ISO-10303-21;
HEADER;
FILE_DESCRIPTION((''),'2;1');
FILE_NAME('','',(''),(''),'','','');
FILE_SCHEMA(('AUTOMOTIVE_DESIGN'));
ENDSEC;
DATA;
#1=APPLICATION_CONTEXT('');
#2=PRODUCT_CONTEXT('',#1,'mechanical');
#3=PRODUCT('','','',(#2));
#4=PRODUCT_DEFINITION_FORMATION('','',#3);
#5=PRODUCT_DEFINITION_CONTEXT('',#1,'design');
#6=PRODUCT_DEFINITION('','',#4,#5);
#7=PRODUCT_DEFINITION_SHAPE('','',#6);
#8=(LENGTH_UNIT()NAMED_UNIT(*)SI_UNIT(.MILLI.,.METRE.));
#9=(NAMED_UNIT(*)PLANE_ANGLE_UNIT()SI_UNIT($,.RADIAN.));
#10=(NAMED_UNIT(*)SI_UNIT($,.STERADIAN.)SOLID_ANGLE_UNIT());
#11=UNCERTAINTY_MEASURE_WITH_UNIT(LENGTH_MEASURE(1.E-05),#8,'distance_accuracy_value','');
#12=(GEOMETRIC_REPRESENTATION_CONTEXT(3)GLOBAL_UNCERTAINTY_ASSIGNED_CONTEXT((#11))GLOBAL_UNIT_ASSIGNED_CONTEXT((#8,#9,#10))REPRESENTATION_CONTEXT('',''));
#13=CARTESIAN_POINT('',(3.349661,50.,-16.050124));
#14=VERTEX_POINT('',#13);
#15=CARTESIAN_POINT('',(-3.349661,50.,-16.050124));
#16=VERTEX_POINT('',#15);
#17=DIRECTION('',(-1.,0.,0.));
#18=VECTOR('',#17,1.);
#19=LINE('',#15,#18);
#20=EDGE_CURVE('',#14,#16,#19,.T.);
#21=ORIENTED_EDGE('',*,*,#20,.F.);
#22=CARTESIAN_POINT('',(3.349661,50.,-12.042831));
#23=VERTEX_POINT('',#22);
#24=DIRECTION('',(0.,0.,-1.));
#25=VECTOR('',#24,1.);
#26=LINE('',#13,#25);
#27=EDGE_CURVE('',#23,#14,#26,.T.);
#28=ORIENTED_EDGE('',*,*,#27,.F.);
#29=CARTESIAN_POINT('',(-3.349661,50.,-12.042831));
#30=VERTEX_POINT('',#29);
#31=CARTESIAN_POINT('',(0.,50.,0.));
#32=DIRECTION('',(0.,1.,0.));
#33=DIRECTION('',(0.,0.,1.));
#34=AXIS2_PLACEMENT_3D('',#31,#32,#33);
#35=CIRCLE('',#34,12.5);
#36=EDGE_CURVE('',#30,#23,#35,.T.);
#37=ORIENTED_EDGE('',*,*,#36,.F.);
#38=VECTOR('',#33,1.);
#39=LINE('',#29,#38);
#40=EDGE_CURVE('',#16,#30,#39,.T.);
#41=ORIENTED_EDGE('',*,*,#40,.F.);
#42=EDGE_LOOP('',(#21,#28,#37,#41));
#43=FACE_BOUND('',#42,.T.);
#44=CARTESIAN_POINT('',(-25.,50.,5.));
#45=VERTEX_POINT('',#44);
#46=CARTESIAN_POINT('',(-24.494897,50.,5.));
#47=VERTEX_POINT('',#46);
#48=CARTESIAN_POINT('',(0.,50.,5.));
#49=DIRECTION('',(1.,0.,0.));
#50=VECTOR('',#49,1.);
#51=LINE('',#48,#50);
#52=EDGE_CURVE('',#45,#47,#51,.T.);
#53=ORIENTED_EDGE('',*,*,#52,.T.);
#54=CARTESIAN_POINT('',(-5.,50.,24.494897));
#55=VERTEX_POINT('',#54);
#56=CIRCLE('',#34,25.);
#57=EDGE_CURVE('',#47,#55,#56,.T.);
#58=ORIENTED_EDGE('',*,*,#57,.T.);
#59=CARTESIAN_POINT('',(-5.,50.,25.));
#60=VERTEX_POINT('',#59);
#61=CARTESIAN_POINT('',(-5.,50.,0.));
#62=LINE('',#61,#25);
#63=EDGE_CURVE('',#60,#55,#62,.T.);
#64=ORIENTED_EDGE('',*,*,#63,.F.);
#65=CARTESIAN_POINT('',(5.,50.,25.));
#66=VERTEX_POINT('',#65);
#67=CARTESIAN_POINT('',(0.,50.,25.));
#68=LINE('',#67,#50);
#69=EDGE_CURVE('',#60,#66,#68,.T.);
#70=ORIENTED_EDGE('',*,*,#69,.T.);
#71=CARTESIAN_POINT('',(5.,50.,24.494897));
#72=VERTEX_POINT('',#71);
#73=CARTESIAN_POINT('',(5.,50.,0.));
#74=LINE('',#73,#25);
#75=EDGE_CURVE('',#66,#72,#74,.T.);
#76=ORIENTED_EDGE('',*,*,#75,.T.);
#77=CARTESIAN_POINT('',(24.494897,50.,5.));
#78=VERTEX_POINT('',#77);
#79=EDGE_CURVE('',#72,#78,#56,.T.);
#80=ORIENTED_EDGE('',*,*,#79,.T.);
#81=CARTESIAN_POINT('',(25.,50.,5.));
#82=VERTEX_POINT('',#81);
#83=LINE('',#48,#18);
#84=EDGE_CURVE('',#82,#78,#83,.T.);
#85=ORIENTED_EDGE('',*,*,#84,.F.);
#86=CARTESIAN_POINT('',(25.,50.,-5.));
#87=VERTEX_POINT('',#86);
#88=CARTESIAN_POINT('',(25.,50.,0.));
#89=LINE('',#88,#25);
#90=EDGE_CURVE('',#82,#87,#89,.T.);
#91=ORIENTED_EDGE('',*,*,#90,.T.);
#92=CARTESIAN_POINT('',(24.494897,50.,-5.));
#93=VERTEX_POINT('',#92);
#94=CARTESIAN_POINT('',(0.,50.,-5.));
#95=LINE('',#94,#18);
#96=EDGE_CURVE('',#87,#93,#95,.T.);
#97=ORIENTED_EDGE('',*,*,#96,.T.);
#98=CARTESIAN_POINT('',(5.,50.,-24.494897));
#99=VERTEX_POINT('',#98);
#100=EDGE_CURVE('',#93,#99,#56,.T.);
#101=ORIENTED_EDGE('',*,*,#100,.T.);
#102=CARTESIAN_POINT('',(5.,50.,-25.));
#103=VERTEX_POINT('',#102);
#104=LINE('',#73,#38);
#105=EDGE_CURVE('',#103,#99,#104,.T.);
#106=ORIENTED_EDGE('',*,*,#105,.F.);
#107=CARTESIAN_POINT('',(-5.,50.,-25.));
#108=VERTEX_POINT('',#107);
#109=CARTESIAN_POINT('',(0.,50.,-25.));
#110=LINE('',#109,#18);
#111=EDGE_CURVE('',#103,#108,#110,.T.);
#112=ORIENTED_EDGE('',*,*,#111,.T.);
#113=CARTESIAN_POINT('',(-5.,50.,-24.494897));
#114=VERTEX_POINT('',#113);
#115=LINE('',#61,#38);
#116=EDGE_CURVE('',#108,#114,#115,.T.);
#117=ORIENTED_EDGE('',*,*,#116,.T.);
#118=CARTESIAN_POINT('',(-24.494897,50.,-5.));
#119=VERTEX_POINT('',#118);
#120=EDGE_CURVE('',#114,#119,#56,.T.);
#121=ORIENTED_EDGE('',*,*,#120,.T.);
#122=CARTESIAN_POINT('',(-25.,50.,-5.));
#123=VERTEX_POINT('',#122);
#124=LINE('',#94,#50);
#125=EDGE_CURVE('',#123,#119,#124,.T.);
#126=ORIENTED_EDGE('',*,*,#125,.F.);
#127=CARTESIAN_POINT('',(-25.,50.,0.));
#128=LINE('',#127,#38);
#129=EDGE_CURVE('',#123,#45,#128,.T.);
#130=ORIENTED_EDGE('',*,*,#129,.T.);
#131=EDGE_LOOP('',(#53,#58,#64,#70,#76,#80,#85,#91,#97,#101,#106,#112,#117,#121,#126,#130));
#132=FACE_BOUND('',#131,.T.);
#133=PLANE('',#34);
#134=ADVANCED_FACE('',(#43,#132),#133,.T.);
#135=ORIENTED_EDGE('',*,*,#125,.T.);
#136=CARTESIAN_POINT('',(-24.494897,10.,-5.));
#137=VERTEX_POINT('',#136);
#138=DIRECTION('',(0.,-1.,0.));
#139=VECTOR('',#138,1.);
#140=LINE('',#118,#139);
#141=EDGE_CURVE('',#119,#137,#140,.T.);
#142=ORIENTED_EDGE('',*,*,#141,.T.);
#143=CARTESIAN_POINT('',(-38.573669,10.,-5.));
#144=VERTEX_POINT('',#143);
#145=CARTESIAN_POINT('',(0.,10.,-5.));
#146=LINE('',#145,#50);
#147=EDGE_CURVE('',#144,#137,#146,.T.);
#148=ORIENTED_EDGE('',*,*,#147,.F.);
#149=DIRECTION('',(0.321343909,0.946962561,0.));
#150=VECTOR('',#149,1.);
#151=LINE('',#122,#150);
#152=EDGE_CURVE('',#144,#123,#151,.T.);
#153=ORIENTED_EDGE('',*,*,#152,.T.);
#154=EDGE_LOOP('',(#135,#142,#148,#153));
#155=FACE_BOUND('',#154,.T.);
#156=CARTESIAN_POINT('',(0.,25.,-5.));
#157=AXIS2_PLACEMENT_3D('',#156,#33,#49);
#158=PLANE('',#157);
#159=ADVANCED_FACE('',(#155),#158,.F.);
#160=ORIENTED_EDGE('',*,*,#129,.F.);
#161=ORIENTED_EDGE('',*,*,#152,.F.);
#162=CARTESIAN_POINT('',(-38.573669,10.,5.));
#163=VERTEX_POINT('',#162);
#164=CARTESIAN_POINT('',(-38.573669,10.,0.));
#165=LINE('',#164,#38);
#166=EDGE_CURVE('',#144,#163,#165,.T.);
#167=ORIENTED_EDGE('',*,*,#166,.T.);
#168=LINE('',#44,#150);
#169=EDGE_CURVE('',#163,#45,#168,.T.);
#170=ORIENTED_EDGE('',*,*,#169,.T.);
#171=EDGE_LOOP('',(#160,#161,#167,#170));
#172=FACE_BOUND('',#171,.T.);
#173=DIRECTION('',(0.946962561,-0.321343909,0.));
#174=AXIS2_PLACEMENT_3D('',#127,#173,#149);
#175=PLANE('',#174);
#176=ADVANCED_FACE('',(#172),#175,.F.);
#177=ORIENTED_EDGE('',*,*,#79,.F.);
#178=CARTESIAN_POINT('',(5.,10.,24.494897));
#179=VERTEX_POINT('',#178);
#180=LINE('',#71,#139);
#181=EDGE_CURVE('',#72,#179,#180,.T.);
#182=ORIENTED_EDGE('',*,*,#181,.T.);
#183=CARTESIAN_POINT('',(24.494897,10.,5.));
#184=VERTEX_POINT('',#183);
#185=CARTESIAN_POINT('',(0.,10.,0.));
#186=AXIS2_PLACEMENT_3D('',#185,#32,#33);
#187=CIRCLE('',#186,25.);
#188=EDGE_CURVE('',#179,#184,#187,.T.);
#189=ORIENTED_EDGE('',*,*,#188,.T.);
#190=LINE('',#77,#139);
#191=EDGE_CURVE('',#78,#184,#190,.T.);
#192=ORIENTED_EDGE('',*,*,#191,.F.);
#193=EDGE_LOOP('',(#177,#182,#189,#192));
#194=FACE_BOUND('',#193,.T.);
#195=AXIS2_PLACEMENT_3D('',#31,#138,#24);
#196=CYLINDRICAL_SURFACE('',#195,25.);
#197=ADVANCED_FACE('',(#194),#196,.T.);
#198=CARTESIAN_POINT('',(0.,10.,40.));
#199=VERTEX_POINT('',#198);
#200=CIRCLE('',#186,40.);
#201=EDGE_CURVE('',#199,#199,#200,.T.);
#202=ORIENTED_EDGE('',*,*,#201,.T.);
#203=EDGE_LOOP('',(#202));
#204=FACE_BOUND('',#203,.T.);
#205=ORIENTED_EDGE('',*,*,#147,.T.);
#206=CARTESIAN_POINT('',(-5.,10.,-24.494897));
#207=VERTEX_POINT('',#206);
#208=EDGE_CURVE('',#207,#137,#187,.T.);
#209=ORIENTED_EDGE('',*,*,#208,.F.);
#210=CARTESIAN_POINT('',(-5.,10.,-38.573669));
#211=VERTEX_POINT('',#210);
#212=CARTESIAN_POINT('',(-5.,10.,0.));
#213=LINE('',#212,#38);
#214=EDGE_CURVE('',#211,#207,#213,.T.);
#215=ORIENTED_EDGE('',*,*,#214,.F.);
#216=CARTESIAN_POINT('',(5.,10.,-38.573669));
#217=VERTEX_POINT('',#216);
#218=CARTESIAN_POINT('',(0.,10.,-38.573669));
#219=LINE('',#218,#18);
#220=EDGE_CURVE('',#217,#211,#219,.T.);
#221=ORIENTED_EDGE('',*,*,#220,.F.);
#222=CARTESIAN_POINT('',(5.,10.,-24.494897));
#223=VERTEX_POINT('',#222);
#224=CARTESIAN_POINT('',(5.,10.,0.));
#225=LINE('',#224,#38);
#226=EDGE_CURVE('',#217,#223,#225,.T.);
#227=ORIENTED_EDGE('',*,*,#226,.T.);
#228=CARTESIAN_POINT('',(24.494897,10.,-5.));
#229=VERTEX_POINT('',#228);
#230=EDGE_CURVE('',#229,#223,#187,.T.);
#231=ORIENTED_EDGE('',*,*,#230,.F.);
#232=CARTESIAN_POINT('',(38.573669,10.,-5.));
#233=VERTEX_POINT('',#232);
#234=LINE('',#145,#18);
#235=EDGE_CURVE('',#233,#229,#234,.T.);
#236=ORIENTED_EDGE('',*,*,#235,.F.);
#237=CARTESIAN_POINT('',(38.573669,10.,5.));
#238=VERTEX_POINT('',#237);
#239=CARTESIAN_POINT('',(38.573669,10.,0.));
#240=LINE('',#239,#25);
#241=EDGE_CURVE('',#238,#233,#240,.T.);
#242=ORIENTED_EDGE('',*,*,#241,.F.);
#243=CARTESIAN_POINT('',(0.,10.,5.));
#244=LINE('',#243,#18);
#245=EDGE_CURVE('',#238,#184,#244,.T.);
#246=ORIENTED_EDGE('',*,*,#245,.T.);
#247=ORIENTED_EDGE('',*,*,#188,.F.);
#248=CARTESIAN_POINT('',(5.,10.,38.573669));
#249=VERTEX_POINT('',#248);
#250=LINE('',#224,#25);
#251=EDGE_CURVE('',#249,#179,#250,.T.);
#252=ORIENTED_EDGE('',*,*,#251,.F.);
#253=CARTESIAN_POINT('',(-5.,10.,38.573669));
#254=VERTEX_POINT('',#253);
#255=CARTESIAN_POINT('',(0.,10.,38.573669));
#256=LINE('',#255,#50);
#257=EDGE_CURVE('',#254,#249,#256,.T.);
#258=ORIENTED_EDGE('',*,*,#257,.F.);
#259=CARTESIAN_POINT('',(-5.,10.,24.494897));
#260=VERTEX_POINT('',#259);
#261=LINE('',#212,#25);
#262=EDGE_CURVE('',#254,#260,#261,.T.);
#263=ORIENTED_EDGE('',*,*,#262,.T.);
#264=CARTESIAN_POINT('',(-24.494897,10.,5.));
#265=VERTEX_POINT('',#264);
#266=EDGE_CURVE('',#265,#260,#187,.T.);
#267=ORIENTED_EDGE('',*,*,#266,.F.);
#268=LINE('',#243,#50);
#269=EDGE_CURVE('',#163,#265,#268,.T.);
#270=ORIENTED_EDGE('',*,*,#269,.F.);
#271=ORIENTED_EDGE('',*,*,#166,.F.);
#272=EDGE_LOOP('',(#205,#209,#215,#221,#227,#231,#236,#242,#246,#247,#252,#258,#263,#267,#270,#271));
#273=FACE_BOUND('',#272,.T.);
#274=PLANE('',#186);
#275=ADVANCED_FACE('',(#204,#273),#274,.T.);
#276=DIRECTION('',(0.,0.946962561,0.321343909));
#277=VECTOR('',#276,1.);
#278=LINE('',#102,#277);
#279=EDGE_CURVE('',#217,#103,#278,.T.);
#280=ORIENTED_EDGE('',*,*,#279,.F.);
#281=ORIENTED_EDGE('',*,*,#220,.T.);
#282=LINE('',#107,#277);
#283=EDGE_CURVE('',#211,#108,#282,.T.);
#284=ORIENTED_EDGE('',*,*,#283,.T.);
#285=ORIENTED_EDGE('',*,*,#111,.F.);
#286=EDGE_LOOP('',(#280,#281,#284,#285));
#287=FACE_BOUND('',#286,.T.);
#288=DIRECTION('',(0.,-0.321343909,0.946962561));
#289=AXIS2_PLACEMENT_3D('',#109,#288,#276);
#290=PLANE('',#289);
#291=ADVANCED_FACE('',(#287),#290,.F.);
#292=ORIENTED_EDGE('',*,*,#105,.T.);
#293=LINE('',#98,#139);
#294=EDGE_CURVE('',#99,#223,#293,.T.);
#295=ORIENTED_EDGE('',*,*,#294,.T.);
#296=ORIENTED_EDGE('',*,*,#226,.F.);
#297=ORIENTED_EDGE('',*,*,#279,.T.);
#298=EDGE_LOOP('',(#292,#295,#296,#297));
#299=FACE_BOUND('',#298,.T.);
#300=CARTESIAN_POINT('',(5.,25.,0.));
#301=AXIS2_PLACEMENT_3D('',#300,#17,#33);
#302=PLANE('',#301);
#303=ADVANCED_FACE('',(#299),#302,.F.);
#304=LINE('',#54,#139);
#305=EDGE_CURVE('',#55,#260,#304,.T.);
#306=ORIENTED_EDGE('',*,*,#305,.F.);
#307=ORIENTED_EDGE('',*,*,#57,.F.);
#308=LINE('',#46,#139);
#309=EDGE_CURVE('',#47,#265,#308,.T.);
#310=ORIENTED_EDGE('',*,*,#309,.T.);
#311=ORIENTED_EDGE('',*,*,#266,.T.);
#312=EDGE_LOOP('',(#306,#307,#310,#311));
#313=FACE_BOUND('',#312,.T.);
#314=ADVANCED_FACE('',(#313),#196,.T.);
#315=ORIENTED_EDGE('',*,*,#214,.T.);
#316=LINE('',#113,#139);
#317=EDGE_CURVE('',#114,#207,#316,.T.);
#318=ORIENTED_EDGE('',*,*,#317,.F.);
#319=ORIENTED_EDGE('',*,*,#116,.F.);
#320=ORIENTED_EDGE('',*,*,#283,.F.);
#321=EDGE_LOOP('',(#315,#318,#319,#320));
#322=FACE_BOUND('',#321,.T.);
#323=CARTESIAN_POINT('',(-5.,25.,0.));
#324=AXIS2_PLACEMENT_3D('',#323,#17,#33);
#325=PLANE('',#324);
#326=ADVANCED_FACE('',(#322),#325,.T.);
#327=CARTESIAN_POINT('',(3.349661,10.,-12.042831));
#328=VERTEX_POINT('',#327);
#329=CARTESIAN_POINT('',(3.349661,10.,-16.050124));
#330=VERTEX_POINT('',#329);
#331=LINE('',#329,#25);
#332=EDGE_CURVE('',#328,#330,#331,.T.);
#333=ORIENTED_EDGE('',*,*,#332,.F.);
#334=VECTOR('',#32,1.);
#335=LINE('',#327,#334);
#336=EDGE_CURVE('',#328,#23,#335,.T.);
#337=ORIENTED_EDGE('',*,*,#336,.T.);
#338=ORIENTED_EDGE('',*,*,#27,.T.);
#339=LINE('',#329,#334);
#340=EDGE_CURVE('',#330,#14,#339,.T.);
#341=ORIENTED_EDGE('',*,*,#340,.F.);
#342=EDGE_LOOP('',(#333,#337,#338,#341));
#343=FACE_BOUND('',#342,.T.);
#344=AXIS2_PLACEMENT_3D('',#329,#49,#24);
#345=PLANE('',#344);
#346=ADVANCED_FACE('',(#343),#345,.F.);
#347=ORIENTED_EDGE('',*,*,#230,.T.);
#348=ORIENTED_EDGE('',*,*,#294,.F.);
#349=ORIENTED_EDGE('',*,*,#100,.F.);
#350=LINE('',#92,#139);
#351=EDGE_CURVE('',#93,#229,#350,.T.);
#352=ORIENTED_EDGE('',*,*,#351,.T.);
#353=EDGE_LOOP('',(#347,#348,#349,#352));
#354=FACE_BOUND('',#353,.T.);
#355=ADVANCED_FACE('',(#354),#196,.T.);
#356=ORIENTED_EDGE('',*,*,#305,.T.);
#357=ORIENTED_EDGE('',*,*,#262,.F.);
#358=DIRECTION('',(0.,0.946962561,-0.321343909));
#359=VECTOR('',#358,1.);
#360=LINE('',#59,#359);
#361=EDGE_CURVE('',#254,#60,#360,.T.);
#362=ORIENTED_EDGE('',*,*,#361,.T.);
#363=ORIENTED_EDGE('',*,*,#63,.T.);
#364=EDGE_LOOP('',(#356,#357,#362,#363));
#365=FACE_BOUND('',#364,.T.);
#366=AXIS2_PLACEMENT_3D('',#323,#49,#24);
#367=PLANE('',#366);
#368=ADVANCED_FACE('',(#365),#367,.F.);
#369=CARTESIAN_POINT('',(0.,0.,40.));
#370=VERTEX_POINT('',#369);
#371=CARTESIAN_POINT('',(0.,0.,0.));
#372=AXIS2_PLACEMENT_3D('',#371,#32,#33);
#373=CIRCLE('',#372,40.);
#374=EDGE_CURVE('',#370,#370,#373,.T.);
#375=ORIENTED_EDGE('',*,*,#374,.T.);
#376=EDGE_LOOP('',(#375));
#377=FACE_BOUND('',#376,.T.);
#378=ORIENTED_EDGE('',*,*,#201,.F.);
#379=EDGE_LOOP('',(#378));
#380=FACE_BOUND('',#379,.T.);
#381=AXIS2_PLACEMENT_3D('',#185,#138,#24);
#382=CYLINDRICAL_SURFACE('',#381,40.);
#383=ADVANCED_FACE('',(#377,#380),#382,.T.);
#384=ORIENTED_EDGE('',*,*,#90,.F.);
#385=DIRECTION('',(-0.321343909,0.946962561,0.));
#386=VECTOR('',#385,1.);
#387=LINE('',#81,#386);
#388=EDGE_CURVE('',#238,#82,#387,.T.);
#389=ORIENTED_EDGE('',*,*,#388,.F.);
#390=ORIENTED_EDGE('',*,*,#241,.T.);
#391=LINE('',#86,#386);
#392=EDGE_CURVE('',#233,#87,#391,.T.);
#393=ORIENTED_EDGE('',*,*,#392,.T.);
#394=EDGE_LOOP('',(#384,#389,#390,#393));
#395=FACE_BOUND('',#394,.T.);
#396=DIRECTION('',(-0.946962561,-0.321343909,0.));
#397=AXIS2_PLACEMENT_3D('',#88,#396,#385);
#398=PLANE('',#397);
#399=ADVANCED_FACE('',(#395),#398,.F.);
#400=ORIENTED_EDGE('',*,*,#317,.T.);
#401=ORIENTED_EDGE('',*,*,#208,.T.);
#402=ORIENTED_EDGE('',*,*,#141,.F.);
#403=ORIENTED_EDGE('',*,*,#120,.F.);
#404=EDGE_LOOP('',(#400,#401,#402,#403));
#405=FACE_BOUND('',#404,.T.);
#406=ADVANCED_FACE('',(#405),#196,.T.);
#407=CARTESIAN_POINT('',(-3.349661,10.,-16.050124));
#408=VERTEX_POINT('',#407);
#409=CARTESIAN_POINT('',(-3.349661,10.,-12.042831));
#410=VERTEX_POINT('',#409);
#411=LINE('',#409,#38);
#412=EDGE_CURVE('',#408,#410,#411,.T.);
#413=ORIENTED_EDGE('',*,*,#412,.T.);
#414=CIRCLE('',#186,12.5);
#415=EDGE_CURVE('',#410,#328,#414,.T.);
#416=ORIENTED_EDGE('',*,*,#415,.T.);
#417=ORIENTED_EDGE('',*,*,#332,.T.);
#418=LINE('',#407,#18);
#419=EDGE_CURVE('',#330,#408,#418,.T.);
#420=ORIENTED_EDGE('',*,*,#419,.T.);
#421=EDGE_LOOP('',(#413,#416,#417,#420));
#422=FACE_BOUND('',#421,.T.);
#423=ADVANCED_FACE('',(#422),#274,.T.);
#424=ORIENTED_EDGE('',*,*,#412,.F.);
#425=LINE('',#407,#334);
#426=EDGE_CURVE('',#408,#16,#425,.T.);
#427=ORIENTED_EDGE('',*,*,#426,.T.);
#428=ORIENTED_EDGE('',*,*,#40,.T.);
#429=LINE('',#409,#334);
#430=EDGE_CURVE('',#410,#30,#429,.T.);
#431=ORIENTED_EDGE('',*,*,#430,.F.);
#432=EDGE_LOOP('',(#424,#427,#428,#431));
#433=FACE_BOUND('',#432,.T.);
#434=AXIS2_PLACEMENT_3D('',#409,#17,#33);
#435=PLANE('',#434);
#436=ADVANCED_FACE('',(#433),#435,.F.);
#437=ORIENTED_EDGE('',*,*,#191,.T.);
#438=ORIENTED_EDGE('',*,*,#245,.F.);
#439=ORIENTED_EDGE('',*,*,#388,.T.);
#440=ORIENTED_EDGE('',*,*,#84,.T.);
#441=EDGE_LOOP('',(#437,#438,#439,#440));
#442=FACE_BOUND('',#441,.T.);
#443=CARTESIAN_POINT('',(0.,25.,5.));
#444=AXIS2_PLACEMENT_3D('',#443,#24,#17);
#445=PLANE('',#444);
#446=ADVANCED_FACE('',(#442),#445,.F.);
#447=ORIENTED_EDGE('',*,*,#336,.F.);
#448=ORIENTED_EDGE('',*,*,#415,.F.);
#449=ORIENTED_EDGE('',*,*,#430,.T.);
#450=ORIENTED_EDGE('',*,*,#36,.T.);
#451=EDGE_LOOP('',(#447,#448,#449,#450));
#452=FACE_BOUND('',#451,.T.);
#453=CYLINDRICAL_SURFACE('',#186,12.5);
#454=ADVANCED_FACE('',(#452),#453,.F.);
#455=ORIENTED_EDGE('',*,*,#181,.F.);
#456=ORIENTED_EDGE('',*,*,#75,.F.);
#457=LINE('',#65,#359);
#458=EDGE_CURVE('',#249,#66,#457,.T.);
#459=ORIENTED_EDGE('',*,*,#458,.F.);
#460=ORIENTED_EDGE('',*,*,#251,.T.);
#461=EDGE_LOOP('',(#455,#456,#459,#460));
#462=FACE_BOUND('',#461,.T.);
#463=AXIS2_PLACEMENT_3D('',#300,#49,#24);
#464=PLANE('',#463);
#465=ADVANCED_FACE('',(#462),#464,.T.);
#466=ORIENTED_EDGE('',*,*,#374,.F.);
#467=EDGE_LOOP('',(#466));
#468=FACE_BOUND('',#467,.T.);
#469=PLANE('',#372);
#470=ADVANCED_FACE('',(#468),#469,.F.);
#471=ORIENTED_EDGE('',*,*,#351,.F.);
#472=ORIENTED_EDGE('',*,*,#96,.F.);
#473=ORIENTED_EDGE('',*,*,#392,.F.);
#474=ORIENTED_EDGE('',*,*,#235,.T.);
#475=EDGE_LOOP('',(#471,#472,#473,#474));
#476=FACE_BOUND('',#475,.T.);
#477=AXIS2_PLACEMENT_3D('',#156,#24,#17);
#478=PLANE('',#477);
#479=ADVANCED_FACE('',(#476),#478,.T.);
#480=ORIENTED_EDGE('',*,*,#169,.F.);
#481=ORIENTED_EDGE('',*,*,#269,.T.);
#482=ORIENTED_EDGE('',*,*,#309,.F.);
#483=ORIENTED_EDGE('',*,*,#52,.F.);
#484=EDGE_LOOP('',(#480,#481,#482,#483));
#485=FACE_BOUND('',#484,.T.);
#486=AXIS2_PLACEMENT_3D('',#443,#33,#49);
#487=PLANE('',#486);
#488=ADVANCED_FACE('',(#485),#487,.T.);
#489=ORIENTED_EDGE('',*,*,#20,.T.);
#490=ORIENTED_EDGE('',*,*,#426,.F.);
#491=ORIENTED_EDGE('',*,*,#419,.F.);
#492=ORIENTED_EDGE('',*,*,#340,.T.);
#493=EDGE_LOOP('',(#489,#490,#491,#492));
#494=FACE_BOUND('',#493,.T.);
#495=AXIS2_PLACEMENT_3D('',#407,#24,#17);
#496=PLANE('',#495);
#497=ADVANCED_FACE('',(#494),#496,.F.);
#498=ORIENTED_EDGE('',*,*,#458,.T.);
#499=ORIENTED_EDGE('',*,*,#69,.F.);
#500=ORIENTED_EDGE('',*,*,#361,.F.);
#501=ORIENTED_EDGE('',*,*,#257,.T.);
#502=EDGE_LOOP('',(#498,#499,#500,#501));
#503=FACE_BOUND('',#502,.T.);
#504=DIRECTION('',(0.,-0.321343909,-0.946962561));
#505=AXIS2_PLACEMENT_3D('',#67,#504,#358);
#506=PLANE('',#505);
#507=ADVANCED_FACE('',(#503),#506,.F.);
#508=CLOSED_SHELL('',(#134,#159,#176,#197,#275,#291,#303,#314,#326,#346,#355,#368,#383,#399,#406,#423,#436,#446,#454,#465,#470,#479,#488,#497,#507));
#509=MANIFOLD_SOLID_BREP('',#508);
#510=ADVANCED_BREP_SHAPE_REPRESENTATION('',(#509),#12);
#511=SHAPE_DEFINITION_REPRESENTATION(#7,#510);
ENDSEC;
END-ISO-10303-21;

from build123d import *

# Parameters (mm, degrees)
SCHIZZO1_R                   = 40
ESTRUSIONE_ESTRUSIONE1_DEPTH = 10
SCHIZZO2_R                   = 25
ESTRUSIONE_ESTRUSIONE2_DEPTH = 40
TAGLIO_ESTRUSIONE1_DEPTH     = 40
NERVATURA16_START            = -5
NERVATURA16_DEPTH            = 10
RIPETIZIONECIRCOLARE1_COUNT  = 4


with BuildPart() as part:
    # Schizzo1 → Estrusione-Estrusione1 (new body)
    with BuildSketch(Plane(origin=(0, 0, 0), x_dir=(1, 0, 0), z_dir=(0, 1, 0))):
        with Locations(Location((0, 0, 0), (0, 0, 270))):
            Circle(SCHIZZO1_R)
    extrude(amount=ESTRUSIONE_ESTRUSIONE1_DEPTH)

    # Schizzo2 → Estrusione-Estrusione2 (add)
    with BuildSketch(Plane(origin=(0, 10, 0), x_dir=(1, 0, 0), z_dir=(0, 1, 0))):
        with Locations(Location((0, 0, 0), (0, 0, 270))):
            Circle(SCHIZZO2_R)
    extrude(amount=ESTRUSIONE_ESTRUSIONE2_DEPTH)

    # Schizzo3 → Taglio-Estrusione1 (cut)
    with BuildSketch(Plane(origin=(0, 50, 0), x_dir=(1, 0, 0), z_dir=(0, 1, 0))):
        with BuildLine():
            Line((-3.349661481, 12.042830563), (-3.349661481, 16.050123743))
            Line((-3.349661481, 16.050123743), (3.349661481, 16.050123743))
            Line((3.349661481, 16.050123743), (3.349661481, 12.042830563))
            ThreePointArc((3.349661481, 12.042830563), (0, -12.5), (-3.349661481, 12.042830563))
        make_face()
    extrude(amount=-TAGLIO_ESTRUSIONE1_DEPTH, mode=Mode.SUBTRACT)

    # Nervatura16: read off the stored shape, not the designer's step
    # Nervatura16 outline → Nervatura16 (add)
    with BuildSketch(Plane(origin=(0, 0, 0), x_dir=(0, 0, -1), z_dir=(1, 0, 0)).offset(NERVATURA16_START)):
        Polygon((-24.494897428, 50), (-25, 50), (-38.573669022, 10), (-24.494897428, 10), align=None)
    nervatura16 = extrude(amount=NERVATURA16_DEPTH)

    # RipetizioneCircolare1: Nervatura16 ×4 about axis
    ripetizionecircolare1_axis = Axis((0, 0, 0), (0, 1, 0))
    for i in range(1, RIPETIZIONECIRCOLARE1_COUNT):
        add(nervatura16.rotate(ripetizionecircolare1_axis, i * 360 / RIPETIZIONECIRCOLARE1_COUNT))


solid = part.part
